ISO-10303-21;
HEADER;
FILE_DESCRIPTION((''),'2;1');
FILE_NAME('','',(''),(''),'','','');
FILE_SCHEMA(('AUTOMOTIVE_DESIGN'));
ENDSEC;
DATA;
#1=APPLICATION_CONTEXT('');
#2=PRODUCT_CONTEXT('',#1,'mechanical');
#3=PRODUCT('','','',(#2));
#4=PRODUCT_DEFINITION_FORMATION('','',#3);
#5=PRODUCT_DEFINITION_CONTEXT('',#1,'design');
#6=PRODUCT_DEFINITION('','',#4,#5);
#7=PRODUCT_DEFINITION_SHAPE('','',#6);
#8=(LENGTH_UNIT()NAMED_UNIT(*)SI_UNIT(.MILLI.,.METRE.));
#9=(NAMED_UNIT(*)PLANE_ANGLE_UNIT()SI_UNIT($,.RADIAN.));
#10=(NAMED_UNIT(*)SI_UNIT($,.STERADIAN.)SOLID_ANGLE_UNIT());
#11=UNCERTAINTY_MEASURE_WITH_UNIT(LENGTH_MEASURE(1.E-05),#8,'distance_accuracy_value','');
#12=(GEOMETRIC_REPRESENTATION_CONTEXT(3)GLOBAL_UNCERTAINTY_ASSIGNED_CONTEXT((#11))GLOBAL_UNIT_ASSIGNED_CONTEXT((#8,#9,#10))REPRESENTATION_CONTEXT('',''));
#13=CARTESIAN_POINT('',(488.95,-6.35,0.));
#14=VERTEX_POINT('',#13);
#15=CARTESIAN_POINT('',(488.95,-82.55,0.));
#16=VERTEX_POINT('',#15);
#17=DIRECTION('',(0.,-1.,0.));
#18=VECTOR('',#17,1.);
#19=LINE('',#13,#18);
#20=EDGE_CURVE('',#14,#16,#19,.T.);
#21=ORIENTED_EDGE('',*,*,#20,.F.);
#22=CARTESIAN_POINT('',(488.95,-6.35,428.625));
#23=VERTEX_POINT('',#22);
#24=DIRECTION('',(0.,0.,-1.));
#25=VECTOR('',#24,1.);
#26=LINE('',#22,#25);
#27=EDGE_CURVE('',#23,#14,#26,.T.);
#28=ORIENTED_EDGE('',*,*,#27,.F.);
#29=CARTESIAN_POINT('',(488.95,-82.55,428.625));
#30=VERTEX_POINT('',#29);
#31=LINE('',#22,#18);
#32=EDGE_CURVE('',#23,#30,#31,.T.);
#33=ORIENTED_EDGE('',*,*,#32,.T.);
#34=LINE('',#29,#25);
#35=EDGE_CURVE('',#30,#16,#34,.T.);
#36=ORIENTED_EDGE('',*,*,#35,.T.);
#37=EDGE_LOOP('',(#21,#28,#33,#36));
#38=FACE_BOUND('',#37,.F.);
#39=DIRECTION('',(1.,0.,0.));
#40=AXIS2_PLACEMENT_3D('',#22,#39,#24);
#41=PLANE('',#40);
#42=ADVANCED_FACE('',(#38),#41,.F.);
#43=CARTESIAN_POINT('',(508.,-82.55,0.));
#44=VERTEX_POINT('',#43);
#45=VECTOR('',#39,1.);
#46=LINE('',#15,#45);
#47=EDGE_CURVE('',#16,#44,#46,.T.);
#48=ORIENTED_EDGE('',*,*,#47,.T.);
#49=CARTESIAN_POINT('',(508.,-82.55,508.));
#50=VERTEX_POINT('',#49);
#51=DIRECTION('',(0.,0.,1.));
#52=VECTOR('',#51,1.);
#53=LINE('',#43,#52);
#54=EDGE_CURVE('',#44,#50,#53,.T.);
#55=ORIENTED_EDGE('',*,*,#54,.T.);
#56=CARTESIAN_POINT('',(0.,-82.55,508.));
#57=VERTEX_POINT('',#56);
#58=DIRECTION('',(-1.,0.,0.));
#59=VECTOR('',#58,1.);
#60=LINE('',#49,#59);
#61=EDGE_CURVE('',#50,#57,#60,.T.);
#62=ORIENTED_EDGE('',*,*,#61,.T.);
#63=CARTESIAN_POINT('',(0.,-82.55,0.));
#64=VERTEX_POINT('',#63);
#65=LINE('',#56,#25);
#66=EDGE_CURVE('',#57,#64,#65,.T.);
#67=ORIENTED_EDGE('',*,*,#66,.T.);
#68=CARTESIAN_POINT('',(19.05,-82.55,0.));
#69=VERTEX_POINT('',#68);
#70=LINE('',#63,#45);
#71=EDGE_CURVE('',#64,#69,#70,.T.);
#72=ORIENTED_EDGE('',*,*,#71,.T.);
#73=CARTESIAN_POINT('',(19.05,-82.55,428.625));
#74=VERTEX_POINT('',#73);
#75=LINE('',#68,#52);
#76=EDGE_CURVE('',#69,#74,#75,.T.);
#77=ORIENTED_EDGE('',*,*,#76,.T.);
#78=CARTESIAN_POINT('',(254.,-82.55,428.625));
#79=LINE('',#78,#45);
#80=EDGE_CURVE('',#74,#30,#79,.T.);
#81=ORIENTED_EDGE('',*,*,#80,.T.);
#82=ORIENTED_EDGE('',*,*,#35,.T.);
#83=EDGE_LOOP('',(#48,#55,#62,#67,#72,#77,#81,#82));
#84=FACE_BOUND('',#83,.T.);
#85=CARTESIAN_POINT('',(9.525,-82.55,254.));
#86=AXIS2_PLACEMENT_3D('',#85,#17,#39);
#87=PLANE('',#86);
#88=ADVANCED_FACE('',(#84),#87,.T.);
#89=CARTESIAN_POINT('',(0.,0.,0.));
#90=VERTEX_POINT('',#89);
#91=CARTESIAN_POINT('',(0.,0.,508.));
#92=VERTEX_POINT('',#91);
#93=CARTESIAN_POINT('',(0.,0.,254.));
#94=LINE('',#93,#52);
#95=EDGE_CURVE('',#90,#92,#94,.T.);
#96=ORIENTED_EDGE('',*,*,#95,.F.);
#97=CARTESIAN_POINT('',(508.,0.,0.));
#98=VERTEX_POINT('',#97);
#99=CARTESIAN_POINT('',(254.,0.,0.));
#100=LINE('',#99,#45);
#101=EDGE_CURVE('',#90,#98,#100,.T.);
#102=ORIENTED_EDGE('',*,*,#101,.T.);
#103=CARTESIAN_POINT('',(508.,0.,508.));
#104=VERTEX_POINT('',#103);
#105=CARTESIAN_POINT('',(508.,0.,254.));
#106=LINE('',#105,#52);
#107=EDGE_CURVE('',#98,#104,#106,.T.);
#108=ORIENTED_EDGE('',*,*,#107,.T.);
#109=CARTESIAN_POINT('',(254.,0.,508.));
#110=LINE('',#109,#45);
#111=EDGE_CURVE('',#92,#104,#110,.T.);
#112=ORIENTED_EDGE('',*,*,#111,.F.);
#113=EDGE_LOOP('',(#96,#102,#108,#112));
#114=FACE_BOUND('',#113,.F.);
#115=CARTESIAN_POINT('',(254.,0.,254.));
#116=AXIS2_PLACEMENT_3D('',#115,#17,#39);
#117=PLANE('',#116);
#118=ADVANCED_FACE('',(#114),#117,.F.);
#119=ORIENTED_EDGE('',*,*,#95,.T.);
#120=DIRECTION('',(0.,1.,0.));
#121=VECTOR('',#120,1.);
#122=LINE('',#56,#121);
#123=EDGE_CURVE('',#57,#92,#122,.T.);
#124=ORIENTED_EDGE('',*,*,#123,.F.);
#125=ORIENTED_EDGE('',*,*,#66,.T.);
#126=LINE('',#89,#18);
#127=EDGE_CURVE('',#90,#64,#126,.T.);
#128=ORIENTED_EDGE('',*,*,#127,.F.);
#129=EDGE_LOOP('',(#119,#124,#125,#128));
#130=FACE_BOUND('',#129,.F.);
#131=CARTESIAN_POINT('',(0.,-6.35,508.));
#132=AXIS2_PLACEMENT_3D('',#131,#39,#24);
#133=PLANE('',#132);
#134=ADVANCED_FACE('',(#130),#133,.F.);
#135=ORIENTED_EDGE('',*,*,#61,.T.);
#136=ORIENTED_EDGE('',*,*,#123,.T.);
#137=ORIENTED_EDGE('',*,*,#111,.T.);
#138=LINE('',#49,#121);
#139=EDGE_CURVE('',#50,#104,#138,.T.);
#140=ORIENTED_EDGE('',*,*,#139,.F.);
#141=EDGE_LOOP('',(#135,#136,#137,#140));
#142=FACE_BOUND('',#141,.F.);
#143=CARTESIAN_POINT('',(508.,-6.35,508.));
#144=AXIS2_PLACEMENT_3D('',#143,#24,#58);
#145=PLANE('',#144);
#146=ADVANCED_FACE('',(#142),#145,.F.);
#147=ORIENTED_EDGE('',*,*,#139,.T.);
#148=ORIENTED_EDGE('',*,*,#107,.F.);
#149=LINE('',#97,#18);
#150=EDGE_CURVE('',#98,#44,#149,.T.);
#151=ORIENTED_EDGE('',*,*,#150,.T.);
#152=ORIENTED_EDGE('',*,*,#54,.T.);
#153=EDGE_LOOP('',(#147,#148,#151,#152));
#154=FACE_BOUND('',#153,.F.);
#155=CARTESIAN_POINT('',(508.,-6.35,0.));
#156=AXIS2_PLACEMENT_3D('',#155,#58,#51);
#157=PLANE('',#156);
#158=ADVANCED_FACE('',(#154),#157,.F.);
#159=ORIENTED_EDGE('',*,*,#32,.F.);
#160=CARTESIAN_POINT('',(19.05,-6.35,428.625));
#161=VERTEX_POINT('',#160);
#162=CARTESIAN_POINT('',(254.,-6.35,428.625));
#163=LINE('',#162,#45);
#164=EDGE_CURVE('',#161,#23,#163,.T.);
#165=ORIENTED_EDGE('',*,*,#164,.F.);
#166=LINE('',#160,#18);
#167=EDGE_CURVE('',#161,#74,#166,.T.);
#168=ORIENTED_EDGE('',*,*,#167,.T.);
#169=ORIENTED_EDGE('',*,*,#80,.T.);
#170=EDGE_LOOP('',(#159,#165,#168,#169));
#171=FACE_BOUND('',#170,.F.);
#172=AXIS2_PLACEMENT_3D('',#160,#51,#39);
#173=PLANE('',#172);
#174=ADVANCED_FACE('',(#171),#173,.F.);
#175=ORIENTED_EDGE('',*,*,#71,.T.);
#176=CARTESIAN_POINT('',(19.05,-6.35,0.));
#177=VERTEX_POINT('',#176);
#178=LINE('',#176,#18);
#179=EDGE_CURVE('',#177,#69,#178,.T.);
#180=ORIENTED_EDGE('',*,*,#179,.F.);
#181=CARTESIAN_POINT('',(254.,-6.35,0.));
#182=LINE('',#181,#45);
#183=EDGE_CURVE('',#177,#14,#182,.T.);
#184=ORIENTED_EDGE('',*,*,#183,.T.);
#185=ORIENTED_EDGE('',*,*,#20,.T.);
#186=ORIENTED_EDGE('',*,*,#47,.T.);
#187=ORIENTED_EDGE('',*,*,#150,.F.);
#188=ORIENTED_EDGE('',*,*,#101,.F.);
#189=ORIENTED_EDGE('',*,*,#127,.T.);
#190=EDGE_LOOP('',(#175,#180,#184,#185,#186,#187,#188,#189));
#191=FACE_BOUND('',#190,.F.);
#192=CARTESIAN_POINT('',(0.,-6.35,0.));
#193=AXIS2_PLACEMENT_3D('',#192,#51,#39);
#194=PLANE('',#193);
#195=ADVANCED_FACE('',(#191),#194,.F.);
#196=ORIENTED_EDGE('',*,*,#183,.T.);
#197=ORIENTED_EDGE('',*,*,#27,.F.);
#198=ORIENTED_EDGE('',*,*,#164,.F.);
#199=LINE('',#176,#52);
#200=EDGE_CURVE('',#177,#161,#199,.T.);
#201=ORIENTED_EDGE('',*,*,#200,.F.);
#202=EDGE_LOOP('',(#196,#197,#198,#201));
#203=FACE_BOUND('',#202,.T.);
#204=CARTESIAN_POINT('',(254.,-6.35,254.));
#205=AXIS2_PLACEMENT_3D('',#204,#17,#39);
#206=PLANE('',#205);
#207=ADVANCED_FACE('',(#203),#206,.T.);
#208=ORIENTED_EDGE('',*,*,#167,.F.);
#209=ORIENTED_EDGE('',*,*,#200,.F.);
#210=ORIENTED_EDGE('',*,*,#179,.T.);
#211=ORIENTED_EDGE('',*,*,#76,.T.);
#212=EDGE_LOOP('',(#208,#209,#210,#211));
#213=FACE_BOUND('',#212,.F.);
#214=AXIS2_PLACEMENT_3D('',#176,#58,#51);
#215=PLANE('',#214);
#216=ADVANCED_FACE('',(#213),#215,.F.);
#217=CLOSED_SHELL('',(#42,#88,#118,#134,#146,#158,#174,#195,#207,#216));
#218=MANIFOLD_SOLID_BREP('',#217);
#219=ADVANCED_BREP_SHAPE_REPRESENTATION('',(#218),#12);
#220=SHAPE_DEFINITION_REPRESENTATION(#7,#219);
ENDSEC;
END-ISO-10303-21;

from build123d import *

# Parameters (mm, degrees)
F0_W     = 508
F0_H     = 508
F2_DEPTH = 6.35
F3_W     = 469.9
F3_H     = 79.375
F4_DEPTH = 76.2


with BuildPart() as f2:
    # F0 (on Front) → F2 (new body)
    with BuildSketch(Plane.XZ):
        with Locations((254, 254)):
            Rectangle(F0_W, F0_H)
    extrude(amount=F2_DEPTH)

    # F3 (on face) → F4 (join)
    with BuildSketch(Plane.XZ.offset(6.35)):
        Polygon((0, 508), (0, 0), (19.05, 0), (19.05, 428.625), (19.05, 508), align=None)
        with Locations((254, 468.3125)):
            Rectangle(F3_W, F3_H)
        Polygon((488.95, 508), (488.95, 428.625), (488.95, 0), (508, 0), (508, 508), align=None)
    extrude(amount=F4_DEPTH)


solid = f2.part
